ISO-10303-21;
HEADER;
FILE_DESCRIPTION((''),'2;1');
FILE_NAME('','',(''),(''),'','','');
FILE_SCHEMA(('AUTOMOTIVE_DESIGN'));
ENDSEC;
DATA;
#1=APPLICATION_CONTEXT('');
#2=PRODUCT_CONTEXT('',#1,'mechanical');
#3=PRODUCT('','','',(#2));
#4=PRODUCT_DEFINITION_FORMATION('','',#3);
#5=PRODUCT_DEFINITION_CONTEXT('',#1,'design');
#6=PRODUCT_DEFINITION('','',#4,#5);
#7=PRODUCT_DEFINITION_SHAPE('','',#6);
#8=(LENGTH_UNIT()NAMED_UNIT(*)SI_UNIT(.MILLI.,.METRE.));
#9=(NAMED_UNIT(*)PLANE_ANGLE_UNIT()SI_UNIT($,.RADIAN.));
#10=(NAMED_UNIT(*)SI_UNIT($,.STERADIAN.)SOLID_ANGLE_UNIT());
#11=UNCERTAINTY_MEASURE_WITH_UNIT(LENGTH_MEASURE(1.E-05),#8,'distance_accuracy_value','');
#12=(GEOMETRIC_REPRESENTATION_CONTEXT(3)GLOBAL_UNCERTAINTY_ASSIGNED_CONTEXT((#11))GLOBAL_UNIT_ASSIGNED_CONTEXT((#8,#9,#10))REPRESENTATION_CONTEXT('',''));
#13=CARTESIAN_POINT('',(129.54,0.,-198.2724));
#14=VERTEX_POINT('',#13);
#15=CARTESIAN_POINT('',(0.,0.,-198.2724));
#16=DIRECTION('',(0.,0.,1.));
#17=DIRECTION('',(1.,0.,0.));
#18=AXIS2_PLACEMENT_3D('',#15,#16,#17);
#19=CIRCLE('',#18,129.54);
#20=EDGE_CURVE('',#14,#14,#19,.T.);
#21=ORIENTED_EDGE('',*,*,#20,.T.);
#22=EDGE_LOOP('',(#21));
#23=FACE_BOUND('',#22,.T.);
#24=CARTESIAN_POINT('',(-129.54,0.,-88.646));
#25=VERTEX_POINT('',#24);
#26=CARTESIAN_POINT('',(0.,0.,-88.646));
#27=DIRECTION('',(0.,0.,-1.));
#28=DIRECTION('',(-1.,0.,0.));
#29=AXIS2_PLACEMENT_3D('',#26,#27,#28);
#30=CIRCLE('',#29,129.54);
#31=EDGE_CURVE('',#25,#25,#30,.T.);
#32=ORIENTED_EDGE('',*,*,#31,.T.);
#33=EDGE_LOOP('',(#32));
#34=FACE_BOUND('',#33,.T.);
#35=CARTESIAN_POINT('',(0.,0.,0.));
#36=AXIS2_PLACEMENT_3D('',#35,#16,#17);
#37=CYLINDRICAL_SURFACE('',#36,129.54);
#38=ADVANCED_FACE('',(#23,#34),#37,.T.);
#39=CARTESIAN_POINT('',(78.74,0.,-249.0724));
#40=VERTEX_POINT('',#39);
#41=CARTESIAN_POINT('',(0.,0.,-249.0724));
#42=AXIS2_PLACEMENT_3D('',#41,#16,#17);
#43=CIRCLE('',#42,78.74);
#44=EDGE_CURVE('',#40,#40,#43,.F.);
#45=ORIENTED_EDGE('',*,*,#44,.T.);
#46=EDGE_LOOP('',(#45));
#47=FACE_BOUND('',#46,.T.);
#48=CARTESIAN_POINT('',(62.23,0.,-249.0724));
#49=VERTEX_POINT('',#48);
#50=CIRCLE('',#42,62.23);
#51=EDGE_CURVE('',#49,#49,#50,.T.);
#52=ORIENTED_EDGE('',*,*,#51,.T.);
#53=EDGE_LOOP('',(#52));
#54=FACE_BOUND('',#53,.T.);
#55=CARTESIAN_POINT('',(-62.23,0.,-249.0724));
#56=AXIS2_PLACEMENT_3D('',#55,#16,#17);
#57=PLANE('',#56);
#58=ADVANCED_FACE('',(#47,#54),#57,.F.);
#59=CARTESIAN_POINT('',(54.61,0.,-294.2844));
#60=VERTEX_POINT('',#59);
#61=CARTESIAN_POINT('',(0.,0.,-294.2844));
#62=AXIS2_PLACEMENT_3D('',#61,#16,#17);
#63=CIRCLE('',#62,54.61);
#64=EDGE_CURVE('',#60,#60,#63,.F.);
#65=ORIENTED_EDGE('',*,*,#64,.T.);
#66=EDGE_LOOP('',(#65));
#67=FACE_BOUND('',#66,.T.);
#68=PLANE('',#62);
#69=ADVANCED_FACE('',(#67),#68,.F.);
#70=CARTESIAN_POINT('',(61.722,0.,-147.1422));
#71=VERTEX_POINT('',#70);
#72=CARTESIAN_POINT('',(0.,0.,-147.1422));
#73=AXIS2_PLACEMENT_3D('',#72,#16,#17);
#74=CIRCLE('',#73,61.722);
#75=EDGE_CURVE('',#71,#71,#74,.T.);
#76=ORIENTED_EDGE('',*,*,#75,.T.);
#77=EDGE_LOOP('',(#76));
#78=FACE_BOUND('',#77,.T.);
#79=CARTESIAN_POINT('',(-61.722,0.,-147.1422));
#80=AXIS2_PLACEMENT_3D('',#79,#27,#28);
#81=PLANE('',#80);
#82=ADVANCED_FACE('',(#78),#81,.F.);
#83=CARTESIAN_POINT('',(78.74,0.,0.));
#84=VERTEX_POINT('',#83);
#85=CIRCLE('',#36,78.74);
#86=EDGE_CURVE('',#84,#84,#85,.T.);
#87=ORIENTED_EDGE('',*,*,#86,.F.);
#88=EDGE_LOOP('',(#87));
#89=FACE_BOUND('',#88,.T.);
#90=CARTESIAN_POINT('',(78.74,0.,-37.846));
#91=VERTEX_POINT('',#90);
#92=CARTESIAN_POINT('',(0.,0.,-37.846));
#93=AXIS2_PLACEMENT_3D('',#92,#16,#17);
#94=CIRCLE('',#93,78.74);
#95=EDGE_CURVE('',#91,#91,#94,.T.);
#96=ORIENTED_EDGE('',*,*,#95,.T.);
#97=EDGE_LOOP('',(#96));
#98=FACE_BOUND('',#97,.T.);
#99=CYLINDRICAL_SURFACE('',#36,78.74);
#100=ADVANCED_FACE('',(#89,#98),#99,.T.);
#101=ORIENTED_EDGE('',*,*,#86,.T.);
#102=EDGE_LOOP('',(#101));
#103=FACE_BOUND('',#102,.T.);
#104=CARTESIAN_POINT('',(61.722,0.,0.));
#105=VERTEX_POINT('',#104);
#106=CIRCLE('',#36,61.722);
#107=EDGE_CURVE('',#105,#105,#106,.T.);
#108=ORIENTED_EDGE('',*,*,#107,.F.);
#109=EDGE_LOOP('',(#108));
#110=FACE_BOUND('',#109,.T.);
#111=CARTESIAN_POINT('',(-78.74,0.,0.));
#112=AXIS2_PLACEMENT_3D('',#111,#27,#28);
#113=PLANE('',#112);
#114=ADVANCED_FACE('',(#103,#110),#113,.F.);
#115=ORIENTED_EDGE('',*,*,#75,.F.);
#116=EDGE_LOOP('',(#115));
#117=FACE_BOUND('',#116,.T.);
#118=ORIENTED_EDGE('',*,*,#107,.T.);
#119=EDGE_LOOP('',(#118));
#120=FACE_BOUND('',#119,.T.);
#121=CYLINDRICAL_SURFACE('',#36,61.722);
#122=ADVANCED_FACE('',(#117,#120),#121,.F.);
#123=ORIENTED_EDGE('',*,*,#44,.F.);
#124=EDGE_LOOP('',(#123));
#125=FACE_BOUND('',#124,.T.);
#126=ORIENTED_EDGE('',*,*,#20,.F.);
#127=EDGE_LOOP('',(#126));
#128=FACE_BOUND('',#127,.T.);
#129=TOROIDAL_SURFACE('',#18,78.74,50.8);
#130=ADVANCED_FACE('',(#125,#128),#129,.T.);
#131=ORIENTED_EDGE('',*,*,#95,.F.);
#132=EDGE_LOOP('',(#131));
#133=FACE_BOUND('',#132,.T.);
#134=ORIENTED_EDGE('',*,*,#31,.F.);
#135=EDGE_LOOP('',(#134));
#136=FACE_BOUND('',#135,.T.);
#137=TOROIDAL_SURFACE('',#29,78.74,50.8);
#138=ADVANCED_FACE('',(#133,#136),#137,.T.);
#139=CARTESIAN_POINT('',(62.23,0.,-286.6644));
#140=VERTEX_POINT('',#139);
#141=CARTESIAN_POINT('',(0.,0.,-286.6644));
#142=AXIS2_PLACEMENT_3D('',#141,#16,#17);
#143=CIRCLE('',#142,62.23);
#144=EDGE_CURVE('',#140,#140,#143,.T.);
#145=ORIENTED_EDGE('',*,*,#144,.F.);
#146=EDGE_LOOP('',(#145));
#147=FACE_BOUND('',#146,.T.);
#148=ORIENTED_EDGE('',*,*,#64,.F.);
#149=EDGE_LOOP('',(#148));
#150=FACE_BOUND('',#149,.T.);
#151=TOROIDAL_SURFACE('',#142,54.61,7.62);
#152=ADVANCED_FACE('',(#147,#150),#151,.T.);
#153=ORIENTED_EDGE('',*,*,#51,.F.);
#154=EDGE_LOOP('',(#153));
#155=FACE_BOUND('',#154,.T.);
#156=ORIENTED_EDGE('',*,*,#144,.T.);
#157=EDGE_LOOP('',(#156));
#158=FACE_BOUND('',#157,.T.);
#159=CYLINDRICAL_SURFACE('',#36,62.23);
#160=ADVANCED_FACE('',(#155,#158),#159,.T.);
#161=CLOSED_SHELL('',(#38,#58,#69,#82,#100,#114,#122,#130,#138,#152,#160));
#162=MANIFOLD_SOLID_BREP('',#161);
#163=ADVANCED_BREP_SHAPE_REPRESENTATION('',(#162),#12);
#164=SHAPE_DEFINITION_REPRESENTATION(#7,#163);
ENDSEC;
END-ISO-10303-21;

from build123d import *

# Parameters (mm, degrees)
FILLET2_R = 50.8
FILLET3_R = 7.62


with BuildPart() as part:
    # Sketch1 → Revolve1 (revolve)
    with BuildSketch(Plane(origin=(0, 0, 0), x_dir=(1, 0, 0), z_dir=(0, 1, 0)), mode=Mode.PRIVATE) as revolve1_sk:
        Polygon((-78.74, 0), (-61.722, 0), (-61.722, 147.1422), (0, 147.1422), (0, 294.2844), (-62.23, 294.2844), (-62.23, 249.0724), (-129.54, 249.0724), (-129.54, 37.846), (-78.74, 37.846), align=None)
    revolve(revolve1_sk.sketch.rotate(Axis((0, 0, 0), (0, 0, -1)), 180), axis=Axis((0, 0, 0), (0, 0, -1)))

    # Fillet2
    fillet2_edges = [part.edges().sort_by_distance(p)[0] for p in [
        (-129.54, 0, -37.846),
        (-129.54, 0, -249.0724),
    ]]
    fillet(fillet2_edges, radius=FILLET2_R - 0.0001)  # a hair under: the kernel refuses the full size

    # Fillet3
    fillet3_edges = [part.edges().sort_by_distance(p)[0] for p in [
        (-62.23, 0, -294.2844),
    ]]
    fillet(fillet3_edges, radius=FILLET3_R)


solid = part.part
